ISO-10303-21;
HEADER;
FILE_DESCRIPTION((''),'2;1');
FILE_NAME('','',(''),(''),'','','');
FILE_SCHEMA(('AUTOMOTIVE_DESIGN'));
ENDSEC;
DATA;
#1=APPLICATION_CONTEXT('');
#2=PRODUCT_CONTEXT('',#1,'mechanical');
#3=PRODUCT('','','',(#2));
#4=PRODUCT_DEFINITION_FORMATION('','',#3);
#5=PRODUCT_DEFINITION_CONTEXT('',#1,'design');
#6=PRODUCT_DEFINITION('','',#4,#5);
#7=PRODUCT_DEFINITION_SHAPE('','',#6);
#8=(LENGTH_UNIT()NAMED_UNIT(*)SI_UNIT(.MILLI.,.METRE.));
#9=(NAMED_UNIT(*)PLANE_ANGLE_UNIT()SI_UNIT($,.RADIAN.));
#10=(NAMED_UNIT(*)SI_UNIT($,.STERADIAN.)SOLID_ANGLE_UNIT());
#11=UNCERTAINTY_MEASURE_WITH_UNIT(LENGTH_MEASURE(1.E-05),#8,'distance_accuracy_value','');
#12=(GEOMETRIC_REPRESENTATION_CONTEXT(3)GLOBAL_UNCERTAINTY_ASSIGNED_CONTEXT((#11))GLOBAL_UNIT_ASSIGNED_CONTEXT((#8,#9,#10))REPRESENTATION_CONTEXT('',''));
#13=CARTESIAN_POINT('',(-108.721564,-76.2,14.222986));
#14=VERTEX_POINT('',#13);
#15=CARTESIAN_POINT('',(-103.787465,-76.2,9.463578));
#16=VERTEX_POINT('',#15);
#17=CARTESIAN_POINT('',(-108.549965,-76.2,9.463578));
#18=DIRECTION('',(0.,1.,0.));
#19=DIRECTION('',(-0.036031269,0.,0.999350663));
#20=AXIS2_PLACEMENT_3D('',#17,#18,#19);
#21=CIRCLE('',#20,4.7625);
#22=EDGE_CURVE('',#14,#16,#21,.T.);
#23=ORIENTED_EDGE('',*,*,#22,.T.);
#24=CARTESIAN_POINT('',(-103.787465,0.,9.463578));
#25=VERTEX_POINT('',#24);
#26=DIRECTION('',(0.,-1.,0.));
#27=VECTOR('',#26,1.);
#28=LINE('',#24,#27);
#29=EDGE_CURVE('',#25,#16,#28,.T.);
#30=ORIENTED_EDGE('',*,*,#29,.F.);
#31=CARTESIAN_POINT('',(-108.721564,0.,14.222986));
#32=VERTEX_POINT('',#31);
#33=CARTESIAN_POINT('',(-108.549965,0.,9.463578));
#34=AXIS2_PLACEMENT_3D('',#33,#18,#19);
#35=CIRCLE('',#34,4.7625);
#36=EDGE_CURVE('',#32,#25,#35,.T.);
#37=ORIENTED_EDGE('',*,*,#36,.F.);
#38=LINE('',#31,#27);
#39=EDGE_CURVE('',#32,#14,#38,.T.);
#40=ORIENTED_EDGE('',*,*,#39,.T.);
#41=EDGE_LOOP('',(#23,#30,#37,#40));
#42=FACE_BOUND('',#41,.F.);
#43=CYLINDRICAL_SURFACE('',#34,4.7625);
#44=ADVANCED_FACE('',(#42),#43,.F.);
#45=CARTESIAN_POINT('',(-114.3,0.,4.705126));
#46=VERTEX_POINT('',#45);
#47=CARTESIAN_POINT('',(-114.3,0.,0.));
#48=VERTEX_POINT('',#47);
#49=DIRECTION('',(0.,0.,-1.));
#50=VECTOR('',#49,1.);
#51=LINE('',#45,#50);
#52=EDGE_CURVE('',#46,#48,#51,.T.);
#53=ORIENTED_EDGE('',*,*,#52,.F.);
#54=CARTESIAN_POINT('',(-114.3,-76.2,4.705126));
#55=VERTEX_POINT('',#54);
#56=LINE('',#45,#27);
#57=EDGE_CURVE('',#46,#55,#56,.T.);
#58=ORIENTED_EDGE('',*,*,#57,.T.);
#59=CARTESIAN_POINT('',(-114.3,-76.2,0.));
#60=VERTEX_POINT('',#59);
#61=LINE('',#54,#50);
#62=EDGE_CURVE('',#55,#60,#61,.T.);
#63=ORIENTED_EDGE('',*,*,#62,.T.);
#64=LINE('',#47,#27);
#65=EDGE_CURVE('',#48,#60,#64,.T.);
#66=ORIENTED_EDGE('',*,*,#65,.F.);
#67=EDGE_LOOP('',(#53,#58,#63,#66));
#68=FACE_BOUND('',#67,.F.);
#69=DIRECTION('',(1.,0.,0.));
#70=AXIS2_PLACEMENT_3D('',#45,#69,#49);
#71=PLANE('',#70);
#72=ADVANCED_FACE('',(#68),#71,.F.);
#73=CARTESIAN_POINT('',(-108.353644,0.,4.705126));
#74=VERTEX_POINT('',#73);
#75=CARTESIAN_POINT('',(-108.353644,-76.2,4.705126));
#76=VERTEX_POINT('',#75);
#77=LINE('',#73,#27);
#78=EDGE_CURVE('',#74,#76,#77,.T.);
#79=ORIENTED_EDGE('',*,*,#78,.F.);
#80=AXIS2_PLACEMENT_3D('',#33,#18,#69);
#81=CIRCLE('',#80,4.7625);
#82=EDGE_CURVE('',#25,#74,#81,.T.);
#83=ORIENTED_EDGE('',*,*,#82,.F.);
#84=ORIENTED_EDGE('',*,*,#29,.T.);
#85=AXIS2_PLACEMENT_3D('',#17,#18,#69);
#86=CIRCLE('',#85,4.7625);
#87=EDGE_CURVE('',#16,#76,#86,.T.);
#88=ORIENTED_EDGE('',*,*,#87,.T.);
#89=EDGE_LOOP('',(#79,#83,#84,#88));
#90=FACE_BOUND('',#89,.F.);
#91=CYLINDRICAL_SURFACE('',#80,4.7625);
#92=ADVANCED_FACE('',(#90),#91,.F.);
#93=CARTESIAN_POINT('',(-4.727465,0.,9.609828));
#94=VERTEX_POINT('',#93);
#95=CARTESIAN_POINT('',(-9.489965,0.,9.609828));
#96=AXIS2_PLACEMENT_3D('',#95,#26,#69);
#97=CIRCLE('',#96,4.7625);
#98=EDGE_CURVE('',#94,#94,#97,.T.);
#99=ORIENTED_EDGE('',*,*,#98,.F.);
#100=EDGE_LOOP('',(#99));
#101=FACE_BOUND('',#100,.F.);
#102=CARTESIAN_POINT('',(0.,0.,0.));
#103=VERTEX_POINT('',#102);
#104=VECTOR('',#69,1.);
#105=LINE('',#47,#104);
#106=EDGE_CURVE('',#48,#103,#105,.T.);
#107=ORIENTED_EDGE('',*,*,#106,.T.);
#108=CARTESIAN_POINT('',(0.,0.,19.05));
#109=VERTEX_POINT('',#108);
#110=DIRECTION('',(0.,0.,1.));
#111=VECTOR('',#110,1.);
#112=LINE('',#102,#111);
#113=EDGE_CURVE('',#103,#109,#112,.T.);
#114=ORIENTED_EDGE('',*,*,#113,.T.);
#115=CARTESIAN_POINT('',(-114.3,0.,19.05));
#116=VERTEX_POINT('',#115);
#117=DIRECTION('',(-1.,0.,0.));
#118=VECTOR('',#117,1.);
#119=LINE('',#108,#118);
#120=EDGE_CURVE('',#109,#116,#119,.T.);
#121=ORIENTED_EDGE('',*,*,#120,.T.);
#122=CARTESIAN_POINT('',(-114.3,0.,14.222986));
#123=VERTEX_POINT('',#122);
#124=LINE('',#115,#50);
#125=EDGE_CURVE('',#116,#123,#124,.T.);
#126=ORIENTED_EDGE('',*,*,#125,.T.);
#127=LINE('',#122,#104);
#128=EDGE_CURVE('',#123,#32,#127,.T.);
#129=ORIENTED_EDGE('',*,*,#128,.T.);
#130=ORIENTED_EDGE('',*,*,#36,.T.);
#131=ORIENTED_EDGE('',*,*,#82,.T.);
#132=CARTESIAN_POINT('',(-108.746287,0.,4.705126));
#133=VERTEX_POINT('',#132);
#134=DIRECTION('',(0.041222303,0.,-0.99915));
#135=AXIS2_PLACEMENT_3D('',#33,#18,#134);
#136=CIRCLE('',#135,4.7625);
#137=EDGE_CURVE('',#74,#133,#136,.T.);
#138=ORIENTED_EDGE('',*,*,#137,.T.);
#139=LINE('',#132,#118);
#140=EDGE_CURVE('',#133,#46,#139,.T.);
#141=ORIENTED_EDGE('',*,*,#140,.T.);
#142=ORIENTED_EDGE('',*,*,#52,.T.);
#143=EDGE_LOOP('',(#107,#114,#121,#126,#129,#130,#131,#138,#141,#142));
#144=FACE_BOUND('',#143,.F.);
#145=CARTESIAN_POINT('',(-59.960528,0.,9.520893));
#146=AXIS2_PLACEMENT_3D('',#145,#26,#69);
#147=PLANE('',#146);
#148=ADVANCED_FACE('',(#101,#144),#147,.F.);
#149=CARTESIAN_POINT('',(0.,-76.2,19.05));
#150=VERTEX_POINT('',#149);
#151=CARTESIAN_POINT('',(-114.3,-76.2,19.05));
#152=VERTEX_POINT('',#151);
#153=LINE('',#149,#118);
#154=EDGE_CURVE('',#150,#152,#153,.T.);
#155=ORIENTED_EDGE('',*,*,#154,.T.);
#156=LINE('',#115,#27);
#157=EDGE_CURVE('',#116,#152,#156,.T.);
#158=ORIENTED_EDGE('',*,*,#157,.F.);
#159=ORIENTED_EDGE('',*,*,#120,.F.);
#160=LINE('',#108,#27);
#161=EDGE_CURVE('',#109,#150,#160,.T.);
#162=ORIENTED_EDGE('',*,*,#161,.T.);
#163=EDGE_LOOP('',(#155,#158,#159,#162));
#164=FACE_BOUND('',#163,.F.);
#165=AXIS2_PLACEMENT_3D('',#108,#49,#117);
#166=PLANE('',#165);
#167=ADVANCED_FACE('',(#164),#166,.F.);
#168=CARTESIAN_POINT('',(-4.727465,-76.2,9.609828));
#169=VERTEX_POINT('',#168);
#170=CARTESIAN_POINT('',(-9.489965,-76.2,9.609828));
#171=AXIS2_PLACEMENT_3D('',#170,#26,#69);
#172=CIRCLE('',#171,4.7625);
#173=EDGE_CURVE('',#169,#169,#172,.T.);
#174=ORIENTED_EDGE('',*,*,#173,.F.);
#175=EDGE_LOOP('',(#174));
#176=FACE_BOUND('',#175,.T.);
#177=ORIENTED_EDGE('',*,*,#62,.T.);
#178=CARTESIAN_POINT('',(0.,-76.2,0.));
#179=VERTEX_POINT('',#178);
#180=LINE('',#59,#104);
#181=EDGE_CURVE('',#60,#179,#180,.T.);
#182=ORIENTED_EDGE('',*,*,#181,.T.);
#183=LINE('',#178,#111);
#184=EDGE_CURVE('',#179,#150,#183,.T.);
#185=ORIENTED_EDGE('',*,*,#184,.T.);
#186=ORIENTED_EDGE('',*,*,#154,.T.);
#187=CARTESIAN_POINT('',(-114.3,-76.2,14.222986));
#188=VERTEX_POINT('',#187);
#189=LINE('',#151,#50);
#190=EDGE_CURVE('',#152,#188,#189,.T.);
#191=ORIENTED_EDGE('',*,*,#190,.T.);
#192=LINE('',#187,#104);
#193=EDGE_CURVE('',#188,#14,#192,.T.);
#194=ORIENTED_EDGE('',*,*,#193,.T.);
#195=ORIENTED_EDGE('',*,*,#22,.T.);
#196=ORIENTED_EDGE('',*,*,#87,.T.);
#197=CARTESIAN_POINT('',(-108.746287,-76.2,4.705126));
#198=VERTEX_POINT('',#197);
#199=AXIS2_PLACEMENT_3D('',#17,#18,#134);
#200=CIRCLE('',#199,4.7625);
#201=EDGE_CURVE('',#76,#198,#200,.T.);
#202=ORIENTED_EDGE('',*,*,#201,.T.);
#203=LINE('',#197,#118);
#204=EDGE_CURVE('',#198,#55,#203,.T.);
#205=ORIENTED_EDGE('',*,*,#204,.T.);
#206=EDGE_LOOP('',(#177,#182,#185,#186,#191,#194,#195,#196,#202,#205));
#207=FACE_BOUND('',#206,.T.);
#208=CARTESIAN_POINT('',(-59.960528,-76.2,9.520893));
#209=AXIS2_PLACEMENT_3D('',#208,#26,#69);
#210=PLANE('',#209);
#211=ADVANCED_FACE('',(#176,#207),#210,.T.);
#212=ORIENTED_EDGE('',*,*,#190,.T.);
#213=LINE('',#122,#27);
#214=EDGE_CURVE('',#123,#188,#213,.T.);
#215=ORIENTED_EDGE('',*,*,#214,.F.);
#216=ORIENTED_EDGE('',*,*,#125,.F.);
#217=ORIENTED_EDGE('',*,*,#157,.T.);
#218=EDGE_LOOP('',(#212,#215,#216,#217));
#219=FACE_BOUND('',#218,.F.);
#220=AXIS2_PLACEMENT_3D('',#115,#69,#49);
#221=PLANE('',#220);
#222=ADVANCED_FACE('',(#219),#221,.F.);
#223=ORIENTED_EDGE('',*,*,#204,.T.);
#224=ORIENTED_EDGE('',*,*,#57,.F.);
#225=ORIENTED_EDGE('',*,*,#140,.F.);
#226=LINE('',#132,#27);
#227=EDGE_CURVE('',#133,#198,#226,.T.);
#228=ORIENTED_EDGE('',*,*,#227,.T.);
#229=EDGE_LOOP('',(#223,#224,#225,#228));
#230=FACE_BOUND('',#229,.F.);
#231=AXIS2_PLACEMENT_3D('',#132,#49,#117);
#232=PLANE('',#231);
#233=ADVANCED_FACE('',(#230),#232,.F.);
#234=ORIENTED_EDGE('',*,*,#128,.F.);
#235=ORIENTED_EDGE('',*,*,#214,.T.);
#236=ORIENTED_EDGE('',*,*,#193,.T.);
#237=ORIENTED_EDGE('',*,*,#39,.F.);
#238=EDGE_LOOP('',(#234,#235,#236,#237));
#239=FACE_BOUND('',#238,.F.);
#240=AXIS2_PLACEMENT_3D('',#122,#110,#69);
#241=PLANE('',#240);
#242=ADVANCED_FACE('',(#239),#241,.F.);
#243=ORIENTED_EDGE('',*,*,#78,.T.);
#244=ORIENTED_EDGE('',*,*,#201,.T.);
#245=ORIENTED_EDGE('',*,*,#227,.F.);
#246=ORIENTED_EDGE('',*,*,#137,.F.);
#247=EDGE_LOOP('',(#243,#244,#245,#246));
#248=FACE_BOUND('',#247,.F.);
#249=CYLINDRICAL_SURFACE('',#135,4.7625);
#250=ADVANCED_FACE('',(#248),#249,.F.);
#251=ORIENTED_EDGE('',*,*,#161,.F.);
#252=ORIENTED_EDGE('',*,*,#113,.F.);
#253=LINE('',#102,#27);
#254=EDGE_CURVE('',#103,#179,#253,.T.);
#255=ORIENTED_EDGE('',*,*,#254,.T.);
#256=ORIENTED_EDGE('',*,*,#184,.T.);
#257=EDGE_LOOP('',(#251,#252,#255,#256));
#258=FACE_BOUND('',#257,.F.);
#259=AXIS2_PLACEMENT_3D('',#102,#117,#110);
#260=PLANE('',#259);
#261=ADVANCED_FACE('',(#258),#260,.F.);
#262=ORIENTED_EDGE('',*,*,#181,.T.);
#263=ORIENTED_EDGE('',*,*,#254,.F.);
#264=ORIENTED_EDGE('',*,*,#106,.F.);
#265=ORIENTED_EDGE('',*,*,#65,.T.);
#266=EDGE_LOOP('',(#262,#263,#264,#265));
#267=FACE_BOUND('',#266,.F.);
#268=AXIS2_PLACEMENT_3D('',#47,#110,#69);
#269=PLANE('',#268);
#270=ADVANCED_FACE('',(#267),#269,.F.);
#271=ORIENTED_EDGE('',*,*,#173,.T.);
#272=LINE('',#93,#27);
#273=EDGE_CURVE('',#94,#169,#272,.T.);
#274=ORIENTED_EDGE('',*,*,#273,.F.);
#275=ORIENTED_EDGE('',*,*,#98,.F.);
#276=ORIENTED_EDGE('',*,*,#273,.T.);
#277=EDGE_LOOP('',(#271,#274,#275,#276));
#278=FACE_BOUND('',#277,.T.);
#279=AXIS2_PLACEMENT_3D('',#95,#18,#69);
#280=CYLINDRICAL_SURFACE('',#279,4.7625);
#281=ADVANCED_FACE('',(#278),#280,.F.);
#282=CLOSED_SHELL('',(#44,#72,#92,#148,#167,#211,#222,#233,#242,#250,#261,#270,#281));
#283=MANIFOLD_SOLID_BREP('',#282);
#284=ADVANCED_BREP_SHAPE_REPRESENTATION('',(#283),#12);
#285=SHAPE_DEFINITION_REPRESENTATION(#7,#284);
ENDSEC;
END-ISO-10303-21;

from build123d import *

# Parameters (mm, degrees)
F0_R     = 4.7625
F1_DEPTH = 76.2


# Not quite as in the source:
# - the program builds the solid bodies; features that only make, move or delete a surface that nothing else refers to are left out


with BuildPart() as f1:
    # F0 (on Front) → F1 (new body)
    with BuildSketch(Plane.XZ):
        with BuildLine():
            Line((-114.3, 0), (0, 0))
            Line((0, 0), (0, 19.05))
            Line((0, 19.05), (-114.3, 19.05))
            Line((-114.3, 19.05), (-114.3, 14.2229856587))
            Line((-114.3, 14.2229856587), (-108.7215644084, 14.2229856587))
            ThreePointArc((-108.7215644084, 14.2229856587), (-105.2435953967, 12.891306681), (-103.7874654915, 9.4635781261))
            ThreePointArc((-103.7874654915, 9.4635781261), (-105.1136603504, 6.1661225575), (-108.3536442745, 4.7051262529))
            ThreePointArc((-108.3536442745, 4.7051262529), (-108.5499654915, 4.7010781261), (-108.7462867086, 4.7051262529))
            Line((-108.7462867086, 4.7051262529), (-114.3, 4.7051262529))
            Line((-114.3, 4.7051262529), (-114.3, 0))
        make_face()
        with Locations((-9.4899654915, 9.609828106)):
            Circle(F0_R, mode=Mode.SUBTRACT)
    extrude(amount=F1_DEPTH)


solid = f1.part
